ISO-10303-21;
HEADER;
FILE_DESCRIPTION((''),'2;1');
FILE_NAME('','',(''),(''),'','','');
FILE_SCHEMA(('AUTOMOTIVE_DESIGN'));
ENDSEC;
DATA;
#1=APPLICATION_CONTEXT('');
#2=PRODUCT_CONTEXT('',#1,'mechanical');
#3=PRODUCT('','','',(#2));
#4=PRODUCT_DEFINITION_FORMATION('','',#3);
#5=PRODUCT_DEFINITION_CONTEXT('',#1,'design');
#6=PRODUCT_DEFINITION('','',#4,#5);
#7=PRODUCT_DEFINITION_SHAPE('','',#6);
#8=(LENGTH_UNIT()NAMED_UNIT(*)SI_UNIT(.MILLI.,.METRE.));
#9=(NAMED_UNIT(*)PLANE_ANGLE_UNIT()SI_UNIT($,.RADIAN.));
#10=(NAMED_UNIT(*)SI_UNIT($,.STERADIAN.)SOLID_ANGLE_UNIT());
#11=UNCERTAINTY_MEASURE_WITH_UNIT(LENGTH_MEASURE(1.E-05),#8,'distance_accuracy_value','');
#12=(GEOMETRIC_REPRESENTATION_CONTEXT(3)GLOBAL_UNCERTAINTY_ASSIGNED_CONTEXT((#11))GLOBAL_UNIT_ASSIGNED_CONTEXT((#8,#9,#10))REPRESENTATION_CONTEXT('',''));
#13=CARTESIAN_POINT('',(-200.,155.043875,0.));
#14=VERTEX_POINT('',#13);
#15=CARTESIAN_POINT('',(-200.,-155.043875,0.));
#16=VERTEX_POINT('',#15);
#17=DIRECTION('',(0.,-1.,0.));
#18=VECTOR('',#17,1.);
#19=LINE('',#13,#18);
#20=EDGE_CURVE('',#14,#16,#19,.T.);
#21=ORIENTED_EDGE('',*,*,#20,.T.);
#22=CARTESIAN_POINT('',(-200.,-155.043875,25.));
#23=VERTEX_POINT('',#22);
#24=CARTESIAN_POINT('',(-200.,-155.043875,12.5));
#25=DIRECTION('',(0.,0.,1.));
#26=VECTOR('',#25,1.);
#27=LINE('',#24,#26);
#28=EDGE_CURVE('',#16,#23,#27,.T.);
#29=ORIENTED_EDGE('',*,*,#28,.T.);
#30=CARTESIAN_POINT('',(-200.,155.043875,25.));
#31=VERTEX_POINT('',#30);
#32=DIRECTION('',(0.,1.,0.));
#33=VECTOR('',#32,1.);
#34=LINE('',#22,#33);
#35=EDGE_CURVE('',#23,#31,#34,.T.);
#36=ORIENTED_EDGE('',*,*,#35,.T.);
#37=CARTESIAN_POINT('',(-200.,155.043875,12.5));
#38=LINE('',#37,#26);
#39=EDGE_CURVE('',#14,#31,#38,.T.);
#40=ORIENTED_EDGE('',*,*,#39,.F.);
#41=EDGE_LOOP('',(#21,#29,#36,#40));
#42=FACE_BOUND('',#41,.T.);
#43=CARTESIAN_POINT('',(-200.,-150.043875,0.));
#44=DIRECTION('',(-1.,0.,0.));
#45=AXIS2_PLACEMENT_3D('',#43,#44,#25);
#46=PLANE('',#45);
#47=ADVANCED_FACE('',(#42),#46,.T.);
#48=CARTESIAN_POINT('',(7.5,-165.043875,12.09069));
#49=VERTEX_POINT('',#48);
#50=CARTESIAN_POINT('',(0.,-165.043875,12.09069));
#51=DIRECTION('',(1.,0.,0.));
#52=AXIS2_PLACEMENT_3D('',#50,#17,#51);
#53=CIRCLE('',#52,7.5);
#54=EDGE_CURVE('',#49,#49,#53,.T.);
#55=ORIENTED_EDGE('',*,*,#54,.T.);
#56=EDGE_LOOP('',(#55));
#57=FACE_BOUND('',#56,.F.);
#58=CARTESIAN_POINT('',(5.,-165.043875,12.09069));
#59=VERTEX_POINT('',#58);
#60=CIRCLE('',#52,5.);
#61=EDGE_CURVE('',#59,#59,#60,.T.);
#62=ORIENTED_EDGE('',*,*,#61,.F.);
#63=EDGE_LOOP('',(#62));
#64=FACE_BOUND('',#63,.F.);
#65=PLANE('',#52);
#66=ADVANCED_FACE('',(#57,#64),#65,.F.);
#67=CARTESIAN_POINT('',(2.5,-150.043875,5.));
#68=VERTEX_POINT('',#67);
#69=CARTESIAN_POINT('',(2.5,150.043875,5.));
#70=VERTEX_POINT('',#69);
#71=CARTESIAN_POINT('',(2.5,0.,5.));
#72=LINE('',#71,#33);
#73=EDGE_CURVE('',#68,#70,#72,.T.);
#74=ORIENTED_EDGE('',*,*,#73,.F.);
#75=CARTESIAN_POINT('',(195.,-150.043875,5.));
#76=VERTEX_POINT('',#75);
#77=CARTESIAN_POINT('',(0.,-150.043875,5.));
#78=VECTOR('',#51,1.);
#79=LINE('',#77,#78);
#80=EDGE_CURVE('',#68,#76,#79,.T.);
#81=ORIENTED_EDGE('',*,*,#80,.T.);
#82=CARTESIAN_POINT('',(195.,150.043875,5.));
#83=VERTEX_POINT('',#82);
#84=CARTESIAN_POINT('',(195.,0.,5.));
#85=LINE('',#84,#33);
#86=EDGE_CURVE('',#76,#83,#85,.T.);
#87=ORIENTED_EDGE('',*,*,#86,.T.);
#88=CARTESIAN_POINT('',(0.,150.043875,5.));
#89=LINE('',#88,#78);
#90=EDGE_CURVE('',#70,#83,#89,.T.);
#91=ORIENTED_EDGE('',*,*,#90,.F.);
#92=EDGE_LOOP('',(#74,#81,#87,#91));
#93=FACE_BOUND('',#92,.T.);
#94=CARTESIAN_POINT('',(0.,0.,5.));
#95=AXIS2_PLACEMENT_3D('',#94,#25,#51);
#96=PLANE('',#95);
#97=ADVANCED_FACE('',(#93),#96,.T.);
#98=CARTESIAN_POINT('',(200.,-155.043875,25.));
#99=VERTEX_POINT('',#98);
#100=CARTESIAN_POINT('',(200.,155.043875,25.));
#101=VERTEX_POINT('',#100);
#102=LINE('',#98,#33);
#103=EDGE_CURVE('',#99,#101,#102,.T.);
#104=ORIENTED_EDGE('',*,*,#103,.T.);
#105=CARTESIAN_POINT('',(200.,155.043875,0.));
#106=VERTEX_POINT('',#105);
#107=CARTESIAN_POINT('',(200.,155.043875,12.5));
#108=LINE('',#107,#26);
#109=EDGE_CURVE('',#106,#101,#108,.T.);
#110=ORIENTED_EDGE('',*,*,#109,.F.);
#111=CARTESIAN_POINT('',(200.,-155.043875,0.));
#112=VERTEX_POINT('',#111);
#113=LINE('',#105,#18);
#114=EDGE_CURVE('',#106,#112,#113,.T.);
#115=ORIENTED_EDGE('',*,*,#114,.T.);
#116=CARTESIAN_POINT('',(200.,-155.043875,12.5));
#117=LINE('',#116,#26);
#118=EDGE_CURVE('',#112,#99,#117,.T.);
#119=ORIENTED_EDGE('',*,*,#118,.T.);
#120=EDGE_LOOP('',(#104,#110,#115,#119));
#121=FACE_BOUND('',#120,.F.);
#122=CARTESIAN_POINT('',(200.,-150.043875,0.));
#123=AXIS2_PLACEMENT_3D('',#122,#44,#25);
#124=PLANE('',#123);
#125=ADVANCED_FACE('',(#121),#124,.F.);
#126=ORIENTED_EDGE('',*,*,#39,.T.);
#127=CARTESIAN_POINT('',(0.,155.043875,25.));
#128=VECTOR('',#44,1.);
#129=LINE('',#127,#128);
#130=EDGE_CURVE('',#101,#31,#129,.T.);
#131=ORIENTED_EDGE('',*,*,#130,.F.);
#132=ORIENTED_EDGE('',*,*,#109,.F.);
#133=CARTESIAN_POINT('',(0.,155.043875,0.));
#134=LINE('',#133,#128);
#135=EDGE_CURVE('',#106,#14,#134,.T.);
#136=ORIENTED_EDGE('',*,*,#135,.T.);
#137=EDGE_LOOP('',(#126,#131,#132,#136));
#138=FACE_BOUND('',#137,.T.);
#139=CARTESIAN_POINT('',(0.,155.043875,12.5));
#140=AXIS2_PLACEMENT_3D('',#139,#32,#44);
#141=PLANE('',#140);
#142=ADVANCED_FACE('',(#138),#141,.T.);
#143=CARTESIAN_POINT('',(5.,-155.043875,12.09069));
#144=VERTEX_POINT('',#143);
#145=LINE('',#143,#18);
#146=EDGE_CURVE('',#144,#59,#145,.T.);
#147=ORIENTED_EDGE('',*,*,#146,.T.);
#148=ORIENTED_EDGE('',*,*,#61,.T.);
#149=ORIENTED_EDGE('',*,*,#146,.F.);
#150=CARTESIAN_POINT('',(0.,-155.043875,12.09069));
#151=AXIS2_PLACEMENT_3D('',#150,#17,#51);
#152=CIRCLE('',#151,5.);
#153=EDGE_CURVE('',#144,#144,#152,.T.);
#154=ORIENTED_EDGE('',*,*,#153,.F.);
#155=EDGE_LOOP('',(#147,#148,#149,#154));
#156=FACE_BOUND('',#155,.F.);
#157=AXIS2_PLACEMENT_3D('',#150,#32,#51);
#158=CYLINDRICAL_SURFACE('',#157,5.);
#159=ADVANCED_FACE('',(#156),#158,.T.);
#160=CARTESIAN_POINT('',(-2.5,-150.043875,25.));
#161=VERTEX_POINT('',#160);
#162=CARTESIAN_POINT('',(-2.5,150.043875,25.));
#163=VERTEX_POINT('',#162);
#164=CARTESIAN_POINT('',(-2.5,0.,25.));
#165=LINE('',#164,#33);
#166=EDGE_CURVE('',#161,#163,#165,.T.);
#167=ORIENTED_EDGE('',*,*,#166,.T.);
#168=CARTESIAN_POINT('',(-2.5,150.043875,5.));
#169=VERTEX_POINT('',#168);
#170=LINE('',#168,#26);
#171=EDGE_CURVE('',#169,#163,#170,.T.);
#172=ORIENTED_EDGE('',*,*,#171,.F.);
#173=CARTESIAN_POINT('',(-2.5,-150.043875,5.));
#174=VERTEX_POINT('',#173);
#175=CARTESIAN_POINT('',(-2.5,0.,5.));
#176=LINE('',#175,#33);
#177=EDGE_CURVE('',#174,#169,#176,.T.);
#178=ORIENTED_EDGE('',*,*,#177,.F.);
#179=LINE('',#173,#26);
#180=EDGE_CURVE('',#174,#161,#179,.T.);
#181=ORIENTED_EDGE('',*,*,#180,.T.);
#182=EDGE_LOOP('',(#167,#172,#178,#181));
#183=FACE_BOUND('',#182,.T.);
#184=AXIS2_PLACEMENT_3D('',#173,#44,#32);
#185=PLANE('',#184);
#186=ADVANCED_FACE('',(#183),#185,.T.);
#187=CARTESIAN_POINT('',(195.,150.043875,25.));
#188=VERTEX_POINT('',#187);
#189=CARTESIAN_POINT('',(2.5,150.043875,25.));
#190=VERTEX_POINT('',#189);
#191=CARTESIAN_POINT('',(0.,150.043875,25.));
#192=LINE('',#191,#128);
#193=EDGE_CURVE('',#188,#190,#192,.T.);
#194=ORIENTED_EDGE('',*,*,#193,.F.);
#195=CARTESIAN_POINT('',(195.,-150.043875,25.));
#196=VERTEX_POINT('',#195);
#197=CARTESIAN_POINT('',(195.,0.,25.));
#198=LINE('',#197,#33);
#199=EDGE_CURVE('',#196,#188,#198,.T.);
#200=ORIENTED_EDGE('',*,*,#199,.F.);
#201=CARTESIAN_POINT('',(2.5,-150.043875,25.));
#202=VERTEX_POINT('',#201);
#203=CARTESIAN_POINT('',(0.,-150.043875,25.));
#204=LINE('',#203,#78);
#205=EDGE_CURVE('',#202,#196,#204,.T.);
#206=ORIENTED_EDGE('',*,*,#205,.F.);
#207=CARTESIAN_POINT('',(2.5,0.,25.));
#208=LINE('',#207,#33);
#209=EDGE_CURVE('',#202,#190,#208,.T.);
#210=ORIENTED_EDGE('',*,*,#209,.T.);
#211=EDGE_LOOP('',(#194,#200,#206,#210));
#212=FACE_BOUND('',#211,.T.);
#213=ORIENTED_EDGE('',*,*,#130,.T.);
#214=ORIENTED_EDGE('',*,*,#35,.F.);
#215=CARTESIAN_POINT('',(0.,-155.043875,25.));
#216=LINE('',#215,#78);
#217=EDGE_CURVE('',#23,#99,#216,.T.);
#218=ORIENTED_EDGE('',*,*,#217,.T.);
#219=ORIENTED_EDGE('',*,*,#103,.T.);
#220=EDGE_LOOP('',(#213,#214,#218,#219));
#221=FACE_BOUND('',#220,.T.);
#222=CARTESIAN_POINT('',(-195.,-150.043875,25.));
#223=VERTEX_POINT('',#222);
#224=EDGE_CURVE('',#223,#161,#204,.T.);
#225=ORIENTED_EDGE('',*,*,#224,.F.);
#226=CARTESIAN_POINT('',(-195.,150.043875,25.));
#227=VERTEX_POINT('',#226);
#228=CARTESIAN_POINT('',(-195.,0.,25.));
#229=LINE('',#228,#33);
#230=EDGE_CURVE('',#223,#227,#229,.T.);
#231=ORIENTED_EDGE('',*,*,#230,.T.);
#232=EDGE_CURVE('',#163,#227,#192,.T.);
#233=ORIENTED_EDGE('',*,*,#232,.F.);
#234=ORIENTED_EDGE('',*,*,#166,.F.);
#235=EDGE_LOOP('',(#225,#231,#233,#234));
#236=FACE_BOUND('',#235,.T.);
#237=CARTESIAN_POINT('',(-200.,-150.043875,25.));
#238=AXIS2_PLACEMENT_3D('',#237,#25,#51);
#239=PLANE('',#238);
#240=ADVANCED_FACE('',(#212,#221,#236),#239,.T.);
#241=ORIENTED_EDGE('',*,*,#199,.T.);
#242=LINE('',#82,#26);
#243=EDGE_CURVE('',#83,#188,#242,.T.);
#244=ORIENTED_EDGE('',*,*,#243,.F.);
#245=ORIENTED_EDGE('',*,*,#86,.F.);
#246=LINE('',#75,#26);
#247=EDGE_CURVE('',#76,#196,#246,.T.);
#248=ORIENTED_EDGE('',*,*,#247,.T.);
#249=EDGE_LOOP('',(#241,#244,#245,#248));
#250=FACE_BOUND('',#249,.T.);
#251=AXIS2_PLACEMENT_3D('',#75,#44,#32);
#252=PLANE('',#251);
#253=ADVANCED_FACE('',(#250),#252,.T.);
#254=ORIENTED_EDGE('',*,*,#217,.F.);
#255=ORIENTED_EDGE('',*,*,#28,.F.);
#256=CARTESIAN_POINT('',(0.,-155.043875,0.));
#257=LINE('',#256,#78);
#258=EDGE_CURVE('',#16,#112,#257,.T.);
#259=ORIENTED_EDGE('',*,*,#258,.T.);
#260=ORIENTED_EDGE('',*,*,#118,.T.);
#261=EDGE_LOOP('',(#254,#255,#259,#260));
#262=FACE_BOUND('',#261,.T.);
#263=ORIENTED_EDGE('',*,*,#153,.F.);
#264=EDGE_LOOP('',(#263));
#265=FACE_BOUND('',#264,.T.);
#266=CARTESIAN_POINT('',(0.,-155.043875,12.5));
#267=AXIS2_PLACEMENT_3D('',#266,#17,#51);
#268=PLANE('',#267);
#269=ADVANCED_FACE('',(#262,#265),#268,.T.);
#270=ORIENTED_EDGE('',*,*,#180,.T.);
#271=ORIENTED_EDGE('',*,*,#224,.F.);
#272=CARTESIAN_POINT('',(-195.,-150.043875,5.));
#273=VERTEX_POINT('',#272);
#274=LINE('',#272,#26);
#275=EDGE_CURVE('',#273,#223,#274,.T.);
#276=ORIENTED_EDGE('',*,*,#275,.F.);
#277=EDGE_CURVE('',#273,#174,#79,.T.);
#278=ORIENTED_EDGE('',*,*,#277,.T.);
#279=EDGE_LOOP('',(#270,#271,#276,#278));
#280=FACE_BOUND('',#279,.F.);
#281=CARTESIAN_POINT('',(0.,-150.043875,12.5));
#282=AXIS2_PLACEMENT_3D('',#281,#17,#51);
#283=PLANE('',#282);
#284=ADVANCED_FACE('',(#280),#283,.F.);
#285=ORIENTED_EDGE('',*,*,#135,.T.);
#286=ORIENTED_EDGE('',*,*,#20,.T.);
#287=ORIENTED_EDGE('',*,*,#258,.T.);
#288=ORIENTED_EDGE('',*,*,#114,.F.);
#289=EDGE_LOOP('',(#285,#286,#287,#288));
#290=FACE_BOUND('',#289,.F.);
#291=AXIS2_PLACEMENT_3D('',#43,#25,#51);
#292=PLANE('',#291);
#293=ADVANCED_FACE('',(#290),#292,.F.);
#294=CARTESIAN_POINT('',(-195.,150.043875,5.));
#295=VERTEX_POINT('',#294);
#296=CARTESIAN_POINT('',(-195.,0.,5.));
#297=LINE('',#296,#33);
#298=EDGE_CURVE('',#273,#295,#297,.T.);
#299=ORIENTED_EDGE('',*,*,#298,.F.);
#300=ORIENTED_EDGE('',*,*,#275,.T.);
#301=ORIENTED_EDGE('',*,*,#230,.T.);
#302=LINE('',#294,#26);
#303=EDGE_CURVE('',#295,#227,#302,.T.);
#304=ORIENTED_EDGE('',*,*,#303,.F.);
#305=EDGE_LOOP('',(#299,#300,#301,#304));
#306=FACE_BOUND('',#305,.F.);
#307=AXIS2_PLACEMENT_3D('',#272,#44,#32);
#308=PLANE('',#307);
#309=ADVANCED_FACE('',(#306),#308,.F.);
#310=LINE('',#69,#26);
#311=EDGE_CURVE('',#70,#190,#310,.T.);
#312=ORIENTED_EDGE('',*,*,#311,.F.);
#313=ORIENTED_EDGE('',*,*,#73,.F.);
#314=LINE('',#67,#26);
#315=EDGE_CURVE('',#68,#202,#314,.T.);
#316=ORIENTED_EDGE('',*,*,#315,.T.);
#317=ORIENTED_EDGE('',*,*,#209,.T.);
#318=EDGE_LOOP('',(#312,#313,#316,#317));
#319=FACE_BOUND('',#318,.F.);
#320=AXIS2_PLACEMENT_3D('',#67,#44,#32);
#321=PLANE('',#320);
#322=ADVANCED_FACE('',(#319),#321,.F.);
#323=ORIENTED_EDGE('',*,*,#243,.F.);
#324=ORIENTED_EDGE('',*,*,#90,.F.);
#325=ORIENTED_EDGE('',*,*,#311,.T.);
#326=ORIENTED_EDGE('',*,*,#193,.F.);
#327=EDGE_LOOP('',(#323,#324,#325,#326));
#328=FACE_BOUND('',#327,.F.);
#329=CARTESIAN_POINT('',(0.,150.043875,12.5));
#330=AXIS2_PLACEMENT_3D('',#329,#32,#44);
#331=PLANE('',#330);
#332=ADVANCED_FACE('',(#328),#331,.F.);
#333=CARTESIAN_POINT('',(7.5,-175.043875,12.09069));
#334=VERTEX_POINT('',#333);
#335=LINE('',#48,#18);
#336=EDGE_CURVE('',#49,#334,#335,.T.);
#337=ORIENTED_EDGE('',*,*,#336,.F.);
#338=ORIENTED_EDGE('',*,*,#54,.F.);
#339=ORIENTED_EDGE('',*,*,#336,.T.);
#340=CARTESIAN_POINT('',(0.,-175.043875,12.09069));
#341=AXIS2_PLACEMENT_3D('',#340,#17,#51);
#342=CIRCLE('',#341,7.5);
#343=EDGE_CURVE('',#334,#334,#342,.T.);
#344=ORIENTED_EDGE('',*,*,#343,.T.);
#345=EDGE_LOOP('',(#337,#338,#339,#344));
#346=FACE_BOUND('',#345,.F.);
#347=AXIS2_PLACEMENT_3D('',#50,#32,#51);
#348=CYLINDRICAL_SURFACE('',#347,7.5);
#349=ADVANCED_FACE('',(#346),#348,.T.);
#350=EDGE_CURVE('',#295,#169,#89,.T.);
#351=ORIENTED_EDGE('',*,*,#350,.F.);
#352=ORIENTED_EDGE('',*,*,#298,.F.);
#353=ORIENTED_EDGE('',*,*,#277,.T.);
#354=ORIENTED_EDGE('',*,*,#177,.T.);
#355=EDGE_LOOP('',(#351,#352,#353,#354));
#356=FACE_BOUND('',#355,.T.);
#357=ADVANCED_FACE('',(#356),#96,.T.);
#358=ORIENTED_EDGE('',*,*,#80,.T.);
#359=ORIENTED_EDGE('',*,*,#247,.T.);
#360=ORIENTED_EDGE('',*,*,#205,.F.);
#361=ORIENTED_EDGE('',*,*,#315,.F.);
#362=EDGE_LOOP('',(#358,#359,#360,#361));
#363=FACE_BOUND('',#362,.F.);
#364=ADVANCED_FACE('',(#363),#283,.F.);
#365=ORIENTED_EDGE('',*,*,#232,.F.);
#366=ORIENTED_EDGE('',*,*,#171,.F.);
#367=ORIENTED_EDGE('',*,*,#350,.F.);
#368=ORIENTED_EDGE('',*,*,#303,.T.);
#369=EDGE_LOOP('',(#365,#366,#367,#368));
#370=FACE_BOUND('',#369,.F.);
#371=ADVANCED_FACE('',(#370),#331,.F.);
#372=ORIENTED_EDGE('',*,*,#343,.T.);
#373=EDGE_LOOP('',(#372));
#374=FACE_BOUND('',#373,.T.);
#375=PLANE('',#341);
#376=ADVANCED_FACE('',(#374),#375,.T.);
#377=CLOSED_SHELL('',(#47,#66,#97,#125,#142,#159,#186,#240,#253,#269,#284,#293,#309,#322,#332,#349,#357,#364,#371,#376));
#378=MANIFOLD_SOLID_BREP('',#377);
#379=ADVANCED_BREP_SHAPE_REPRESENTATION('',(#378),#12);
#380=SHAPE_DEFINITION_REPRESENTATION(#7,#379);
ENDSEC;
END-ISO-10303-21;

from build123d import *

# Parameters (mm, degrees)
F0_W      = 38.3663107641
F0_H      = 42.2096475959
F1_DEPTH  = 0.6858
F3_W      = 400
F3_H      = 300.087749958
F4_DEPTH  = 5
F5_W      = 5
F5_H      = 300.087749958
F6_DEPTH  = 20
F7_W      = 5
F7_H      = 300.087749958
F8_DEPTH  = 20
F9_W      = 400
F9_H      = 25
F10_DEPTH = 5
F11_W     = 5
F11_H     = 300.087749958
F12_DEPTH = 20
F13_W     = 400
F13_H     = 25
F14_DEPTH = 5
F15_R     = 5
F16_DEPTH = 10
F17_R     = 7.5
F17_R_2   = 5
F18_DEPTH = 10


with BuildPart() as f1:
    # F0 (on Top) → F1 (new body)
    with BuildSketch(Plane.XY):
        with Locations((-14.0401979443, 21.1048237979)):
            Rectangle(F0_W, F0_H)
    extrude(amount=F1_DEPTH)


with BuildPart() as f4:
    # F3 (on Top) → F4 (new body)
    with BuildSketch(Plane.XY):
        Rectangle(F3_W, F3_H)
    extrude(amount=F4_DEPTH)

    # F5 (on face) → F6 (join)
    with BuildSketch(Plane.XY.offset(5)):
        with Locations((-197.5, 0)):
            Rectangle(F5_W, F5_H)
    extrude(amount=F6_DEPTH)

    # F7 (on face) → F8 (join)
    with BuildSketch(Plane.XY.offset(5)):
        with Locations((197.5, 0)):
            Rectangle(F7_W, F7_H)
    extrude(amount=F8_DEPTH)

    # F9 (on face) → F10 (join)
    with BuildSketch(Plane(origin=(0, 150.043874979, 0), x_dir=(-1, 0, 0), z_dir=(0, 1, 0))):
        with Locations((0, 12.5)):
            Rectangle(F9_W, F9_H)
    extrude(amount=F10_DEPTH)

    # F11 (on face) → F12 (join)
    with BuildSketch(Plane.XY.offset(5)):
        Rectangle(F11_W, F11_H)
    extrude(amount=F12_DEPTH)

    # F13 (on face) → F14 (join)
    with BuildSketch(Plane.XZ.offset(150.043874979)):
        with Locations((0, 12.5)):
            Rectangle(F13_W, F13_H)
    extrude(amount=F14_DEPTH)

    # F15 (on face) → F16 (join)
    with BuildSketch(Plane.XZ.offset(155.043874979)):
        with Locations((0, 12.090690434)):
            Circle(F15_R)
    extrude(amount=F16_DEPTH)

    # F17 (on face) → F18 (join)
    with BuildSketch(Plane.XZ.offset(165.043874979)):
        with Locations((0, 12.090690434)):
            Circle(F17_R)
        with Locations((0, 12.090690434)):
            Circle(F17_R_2, mode=Mode.SUBTRACT)
        with Locations((0, 12.090690434)):
            Circle(F17_R_2)
    extrude(amount=F18_DEPTH)


solid = f4.part
